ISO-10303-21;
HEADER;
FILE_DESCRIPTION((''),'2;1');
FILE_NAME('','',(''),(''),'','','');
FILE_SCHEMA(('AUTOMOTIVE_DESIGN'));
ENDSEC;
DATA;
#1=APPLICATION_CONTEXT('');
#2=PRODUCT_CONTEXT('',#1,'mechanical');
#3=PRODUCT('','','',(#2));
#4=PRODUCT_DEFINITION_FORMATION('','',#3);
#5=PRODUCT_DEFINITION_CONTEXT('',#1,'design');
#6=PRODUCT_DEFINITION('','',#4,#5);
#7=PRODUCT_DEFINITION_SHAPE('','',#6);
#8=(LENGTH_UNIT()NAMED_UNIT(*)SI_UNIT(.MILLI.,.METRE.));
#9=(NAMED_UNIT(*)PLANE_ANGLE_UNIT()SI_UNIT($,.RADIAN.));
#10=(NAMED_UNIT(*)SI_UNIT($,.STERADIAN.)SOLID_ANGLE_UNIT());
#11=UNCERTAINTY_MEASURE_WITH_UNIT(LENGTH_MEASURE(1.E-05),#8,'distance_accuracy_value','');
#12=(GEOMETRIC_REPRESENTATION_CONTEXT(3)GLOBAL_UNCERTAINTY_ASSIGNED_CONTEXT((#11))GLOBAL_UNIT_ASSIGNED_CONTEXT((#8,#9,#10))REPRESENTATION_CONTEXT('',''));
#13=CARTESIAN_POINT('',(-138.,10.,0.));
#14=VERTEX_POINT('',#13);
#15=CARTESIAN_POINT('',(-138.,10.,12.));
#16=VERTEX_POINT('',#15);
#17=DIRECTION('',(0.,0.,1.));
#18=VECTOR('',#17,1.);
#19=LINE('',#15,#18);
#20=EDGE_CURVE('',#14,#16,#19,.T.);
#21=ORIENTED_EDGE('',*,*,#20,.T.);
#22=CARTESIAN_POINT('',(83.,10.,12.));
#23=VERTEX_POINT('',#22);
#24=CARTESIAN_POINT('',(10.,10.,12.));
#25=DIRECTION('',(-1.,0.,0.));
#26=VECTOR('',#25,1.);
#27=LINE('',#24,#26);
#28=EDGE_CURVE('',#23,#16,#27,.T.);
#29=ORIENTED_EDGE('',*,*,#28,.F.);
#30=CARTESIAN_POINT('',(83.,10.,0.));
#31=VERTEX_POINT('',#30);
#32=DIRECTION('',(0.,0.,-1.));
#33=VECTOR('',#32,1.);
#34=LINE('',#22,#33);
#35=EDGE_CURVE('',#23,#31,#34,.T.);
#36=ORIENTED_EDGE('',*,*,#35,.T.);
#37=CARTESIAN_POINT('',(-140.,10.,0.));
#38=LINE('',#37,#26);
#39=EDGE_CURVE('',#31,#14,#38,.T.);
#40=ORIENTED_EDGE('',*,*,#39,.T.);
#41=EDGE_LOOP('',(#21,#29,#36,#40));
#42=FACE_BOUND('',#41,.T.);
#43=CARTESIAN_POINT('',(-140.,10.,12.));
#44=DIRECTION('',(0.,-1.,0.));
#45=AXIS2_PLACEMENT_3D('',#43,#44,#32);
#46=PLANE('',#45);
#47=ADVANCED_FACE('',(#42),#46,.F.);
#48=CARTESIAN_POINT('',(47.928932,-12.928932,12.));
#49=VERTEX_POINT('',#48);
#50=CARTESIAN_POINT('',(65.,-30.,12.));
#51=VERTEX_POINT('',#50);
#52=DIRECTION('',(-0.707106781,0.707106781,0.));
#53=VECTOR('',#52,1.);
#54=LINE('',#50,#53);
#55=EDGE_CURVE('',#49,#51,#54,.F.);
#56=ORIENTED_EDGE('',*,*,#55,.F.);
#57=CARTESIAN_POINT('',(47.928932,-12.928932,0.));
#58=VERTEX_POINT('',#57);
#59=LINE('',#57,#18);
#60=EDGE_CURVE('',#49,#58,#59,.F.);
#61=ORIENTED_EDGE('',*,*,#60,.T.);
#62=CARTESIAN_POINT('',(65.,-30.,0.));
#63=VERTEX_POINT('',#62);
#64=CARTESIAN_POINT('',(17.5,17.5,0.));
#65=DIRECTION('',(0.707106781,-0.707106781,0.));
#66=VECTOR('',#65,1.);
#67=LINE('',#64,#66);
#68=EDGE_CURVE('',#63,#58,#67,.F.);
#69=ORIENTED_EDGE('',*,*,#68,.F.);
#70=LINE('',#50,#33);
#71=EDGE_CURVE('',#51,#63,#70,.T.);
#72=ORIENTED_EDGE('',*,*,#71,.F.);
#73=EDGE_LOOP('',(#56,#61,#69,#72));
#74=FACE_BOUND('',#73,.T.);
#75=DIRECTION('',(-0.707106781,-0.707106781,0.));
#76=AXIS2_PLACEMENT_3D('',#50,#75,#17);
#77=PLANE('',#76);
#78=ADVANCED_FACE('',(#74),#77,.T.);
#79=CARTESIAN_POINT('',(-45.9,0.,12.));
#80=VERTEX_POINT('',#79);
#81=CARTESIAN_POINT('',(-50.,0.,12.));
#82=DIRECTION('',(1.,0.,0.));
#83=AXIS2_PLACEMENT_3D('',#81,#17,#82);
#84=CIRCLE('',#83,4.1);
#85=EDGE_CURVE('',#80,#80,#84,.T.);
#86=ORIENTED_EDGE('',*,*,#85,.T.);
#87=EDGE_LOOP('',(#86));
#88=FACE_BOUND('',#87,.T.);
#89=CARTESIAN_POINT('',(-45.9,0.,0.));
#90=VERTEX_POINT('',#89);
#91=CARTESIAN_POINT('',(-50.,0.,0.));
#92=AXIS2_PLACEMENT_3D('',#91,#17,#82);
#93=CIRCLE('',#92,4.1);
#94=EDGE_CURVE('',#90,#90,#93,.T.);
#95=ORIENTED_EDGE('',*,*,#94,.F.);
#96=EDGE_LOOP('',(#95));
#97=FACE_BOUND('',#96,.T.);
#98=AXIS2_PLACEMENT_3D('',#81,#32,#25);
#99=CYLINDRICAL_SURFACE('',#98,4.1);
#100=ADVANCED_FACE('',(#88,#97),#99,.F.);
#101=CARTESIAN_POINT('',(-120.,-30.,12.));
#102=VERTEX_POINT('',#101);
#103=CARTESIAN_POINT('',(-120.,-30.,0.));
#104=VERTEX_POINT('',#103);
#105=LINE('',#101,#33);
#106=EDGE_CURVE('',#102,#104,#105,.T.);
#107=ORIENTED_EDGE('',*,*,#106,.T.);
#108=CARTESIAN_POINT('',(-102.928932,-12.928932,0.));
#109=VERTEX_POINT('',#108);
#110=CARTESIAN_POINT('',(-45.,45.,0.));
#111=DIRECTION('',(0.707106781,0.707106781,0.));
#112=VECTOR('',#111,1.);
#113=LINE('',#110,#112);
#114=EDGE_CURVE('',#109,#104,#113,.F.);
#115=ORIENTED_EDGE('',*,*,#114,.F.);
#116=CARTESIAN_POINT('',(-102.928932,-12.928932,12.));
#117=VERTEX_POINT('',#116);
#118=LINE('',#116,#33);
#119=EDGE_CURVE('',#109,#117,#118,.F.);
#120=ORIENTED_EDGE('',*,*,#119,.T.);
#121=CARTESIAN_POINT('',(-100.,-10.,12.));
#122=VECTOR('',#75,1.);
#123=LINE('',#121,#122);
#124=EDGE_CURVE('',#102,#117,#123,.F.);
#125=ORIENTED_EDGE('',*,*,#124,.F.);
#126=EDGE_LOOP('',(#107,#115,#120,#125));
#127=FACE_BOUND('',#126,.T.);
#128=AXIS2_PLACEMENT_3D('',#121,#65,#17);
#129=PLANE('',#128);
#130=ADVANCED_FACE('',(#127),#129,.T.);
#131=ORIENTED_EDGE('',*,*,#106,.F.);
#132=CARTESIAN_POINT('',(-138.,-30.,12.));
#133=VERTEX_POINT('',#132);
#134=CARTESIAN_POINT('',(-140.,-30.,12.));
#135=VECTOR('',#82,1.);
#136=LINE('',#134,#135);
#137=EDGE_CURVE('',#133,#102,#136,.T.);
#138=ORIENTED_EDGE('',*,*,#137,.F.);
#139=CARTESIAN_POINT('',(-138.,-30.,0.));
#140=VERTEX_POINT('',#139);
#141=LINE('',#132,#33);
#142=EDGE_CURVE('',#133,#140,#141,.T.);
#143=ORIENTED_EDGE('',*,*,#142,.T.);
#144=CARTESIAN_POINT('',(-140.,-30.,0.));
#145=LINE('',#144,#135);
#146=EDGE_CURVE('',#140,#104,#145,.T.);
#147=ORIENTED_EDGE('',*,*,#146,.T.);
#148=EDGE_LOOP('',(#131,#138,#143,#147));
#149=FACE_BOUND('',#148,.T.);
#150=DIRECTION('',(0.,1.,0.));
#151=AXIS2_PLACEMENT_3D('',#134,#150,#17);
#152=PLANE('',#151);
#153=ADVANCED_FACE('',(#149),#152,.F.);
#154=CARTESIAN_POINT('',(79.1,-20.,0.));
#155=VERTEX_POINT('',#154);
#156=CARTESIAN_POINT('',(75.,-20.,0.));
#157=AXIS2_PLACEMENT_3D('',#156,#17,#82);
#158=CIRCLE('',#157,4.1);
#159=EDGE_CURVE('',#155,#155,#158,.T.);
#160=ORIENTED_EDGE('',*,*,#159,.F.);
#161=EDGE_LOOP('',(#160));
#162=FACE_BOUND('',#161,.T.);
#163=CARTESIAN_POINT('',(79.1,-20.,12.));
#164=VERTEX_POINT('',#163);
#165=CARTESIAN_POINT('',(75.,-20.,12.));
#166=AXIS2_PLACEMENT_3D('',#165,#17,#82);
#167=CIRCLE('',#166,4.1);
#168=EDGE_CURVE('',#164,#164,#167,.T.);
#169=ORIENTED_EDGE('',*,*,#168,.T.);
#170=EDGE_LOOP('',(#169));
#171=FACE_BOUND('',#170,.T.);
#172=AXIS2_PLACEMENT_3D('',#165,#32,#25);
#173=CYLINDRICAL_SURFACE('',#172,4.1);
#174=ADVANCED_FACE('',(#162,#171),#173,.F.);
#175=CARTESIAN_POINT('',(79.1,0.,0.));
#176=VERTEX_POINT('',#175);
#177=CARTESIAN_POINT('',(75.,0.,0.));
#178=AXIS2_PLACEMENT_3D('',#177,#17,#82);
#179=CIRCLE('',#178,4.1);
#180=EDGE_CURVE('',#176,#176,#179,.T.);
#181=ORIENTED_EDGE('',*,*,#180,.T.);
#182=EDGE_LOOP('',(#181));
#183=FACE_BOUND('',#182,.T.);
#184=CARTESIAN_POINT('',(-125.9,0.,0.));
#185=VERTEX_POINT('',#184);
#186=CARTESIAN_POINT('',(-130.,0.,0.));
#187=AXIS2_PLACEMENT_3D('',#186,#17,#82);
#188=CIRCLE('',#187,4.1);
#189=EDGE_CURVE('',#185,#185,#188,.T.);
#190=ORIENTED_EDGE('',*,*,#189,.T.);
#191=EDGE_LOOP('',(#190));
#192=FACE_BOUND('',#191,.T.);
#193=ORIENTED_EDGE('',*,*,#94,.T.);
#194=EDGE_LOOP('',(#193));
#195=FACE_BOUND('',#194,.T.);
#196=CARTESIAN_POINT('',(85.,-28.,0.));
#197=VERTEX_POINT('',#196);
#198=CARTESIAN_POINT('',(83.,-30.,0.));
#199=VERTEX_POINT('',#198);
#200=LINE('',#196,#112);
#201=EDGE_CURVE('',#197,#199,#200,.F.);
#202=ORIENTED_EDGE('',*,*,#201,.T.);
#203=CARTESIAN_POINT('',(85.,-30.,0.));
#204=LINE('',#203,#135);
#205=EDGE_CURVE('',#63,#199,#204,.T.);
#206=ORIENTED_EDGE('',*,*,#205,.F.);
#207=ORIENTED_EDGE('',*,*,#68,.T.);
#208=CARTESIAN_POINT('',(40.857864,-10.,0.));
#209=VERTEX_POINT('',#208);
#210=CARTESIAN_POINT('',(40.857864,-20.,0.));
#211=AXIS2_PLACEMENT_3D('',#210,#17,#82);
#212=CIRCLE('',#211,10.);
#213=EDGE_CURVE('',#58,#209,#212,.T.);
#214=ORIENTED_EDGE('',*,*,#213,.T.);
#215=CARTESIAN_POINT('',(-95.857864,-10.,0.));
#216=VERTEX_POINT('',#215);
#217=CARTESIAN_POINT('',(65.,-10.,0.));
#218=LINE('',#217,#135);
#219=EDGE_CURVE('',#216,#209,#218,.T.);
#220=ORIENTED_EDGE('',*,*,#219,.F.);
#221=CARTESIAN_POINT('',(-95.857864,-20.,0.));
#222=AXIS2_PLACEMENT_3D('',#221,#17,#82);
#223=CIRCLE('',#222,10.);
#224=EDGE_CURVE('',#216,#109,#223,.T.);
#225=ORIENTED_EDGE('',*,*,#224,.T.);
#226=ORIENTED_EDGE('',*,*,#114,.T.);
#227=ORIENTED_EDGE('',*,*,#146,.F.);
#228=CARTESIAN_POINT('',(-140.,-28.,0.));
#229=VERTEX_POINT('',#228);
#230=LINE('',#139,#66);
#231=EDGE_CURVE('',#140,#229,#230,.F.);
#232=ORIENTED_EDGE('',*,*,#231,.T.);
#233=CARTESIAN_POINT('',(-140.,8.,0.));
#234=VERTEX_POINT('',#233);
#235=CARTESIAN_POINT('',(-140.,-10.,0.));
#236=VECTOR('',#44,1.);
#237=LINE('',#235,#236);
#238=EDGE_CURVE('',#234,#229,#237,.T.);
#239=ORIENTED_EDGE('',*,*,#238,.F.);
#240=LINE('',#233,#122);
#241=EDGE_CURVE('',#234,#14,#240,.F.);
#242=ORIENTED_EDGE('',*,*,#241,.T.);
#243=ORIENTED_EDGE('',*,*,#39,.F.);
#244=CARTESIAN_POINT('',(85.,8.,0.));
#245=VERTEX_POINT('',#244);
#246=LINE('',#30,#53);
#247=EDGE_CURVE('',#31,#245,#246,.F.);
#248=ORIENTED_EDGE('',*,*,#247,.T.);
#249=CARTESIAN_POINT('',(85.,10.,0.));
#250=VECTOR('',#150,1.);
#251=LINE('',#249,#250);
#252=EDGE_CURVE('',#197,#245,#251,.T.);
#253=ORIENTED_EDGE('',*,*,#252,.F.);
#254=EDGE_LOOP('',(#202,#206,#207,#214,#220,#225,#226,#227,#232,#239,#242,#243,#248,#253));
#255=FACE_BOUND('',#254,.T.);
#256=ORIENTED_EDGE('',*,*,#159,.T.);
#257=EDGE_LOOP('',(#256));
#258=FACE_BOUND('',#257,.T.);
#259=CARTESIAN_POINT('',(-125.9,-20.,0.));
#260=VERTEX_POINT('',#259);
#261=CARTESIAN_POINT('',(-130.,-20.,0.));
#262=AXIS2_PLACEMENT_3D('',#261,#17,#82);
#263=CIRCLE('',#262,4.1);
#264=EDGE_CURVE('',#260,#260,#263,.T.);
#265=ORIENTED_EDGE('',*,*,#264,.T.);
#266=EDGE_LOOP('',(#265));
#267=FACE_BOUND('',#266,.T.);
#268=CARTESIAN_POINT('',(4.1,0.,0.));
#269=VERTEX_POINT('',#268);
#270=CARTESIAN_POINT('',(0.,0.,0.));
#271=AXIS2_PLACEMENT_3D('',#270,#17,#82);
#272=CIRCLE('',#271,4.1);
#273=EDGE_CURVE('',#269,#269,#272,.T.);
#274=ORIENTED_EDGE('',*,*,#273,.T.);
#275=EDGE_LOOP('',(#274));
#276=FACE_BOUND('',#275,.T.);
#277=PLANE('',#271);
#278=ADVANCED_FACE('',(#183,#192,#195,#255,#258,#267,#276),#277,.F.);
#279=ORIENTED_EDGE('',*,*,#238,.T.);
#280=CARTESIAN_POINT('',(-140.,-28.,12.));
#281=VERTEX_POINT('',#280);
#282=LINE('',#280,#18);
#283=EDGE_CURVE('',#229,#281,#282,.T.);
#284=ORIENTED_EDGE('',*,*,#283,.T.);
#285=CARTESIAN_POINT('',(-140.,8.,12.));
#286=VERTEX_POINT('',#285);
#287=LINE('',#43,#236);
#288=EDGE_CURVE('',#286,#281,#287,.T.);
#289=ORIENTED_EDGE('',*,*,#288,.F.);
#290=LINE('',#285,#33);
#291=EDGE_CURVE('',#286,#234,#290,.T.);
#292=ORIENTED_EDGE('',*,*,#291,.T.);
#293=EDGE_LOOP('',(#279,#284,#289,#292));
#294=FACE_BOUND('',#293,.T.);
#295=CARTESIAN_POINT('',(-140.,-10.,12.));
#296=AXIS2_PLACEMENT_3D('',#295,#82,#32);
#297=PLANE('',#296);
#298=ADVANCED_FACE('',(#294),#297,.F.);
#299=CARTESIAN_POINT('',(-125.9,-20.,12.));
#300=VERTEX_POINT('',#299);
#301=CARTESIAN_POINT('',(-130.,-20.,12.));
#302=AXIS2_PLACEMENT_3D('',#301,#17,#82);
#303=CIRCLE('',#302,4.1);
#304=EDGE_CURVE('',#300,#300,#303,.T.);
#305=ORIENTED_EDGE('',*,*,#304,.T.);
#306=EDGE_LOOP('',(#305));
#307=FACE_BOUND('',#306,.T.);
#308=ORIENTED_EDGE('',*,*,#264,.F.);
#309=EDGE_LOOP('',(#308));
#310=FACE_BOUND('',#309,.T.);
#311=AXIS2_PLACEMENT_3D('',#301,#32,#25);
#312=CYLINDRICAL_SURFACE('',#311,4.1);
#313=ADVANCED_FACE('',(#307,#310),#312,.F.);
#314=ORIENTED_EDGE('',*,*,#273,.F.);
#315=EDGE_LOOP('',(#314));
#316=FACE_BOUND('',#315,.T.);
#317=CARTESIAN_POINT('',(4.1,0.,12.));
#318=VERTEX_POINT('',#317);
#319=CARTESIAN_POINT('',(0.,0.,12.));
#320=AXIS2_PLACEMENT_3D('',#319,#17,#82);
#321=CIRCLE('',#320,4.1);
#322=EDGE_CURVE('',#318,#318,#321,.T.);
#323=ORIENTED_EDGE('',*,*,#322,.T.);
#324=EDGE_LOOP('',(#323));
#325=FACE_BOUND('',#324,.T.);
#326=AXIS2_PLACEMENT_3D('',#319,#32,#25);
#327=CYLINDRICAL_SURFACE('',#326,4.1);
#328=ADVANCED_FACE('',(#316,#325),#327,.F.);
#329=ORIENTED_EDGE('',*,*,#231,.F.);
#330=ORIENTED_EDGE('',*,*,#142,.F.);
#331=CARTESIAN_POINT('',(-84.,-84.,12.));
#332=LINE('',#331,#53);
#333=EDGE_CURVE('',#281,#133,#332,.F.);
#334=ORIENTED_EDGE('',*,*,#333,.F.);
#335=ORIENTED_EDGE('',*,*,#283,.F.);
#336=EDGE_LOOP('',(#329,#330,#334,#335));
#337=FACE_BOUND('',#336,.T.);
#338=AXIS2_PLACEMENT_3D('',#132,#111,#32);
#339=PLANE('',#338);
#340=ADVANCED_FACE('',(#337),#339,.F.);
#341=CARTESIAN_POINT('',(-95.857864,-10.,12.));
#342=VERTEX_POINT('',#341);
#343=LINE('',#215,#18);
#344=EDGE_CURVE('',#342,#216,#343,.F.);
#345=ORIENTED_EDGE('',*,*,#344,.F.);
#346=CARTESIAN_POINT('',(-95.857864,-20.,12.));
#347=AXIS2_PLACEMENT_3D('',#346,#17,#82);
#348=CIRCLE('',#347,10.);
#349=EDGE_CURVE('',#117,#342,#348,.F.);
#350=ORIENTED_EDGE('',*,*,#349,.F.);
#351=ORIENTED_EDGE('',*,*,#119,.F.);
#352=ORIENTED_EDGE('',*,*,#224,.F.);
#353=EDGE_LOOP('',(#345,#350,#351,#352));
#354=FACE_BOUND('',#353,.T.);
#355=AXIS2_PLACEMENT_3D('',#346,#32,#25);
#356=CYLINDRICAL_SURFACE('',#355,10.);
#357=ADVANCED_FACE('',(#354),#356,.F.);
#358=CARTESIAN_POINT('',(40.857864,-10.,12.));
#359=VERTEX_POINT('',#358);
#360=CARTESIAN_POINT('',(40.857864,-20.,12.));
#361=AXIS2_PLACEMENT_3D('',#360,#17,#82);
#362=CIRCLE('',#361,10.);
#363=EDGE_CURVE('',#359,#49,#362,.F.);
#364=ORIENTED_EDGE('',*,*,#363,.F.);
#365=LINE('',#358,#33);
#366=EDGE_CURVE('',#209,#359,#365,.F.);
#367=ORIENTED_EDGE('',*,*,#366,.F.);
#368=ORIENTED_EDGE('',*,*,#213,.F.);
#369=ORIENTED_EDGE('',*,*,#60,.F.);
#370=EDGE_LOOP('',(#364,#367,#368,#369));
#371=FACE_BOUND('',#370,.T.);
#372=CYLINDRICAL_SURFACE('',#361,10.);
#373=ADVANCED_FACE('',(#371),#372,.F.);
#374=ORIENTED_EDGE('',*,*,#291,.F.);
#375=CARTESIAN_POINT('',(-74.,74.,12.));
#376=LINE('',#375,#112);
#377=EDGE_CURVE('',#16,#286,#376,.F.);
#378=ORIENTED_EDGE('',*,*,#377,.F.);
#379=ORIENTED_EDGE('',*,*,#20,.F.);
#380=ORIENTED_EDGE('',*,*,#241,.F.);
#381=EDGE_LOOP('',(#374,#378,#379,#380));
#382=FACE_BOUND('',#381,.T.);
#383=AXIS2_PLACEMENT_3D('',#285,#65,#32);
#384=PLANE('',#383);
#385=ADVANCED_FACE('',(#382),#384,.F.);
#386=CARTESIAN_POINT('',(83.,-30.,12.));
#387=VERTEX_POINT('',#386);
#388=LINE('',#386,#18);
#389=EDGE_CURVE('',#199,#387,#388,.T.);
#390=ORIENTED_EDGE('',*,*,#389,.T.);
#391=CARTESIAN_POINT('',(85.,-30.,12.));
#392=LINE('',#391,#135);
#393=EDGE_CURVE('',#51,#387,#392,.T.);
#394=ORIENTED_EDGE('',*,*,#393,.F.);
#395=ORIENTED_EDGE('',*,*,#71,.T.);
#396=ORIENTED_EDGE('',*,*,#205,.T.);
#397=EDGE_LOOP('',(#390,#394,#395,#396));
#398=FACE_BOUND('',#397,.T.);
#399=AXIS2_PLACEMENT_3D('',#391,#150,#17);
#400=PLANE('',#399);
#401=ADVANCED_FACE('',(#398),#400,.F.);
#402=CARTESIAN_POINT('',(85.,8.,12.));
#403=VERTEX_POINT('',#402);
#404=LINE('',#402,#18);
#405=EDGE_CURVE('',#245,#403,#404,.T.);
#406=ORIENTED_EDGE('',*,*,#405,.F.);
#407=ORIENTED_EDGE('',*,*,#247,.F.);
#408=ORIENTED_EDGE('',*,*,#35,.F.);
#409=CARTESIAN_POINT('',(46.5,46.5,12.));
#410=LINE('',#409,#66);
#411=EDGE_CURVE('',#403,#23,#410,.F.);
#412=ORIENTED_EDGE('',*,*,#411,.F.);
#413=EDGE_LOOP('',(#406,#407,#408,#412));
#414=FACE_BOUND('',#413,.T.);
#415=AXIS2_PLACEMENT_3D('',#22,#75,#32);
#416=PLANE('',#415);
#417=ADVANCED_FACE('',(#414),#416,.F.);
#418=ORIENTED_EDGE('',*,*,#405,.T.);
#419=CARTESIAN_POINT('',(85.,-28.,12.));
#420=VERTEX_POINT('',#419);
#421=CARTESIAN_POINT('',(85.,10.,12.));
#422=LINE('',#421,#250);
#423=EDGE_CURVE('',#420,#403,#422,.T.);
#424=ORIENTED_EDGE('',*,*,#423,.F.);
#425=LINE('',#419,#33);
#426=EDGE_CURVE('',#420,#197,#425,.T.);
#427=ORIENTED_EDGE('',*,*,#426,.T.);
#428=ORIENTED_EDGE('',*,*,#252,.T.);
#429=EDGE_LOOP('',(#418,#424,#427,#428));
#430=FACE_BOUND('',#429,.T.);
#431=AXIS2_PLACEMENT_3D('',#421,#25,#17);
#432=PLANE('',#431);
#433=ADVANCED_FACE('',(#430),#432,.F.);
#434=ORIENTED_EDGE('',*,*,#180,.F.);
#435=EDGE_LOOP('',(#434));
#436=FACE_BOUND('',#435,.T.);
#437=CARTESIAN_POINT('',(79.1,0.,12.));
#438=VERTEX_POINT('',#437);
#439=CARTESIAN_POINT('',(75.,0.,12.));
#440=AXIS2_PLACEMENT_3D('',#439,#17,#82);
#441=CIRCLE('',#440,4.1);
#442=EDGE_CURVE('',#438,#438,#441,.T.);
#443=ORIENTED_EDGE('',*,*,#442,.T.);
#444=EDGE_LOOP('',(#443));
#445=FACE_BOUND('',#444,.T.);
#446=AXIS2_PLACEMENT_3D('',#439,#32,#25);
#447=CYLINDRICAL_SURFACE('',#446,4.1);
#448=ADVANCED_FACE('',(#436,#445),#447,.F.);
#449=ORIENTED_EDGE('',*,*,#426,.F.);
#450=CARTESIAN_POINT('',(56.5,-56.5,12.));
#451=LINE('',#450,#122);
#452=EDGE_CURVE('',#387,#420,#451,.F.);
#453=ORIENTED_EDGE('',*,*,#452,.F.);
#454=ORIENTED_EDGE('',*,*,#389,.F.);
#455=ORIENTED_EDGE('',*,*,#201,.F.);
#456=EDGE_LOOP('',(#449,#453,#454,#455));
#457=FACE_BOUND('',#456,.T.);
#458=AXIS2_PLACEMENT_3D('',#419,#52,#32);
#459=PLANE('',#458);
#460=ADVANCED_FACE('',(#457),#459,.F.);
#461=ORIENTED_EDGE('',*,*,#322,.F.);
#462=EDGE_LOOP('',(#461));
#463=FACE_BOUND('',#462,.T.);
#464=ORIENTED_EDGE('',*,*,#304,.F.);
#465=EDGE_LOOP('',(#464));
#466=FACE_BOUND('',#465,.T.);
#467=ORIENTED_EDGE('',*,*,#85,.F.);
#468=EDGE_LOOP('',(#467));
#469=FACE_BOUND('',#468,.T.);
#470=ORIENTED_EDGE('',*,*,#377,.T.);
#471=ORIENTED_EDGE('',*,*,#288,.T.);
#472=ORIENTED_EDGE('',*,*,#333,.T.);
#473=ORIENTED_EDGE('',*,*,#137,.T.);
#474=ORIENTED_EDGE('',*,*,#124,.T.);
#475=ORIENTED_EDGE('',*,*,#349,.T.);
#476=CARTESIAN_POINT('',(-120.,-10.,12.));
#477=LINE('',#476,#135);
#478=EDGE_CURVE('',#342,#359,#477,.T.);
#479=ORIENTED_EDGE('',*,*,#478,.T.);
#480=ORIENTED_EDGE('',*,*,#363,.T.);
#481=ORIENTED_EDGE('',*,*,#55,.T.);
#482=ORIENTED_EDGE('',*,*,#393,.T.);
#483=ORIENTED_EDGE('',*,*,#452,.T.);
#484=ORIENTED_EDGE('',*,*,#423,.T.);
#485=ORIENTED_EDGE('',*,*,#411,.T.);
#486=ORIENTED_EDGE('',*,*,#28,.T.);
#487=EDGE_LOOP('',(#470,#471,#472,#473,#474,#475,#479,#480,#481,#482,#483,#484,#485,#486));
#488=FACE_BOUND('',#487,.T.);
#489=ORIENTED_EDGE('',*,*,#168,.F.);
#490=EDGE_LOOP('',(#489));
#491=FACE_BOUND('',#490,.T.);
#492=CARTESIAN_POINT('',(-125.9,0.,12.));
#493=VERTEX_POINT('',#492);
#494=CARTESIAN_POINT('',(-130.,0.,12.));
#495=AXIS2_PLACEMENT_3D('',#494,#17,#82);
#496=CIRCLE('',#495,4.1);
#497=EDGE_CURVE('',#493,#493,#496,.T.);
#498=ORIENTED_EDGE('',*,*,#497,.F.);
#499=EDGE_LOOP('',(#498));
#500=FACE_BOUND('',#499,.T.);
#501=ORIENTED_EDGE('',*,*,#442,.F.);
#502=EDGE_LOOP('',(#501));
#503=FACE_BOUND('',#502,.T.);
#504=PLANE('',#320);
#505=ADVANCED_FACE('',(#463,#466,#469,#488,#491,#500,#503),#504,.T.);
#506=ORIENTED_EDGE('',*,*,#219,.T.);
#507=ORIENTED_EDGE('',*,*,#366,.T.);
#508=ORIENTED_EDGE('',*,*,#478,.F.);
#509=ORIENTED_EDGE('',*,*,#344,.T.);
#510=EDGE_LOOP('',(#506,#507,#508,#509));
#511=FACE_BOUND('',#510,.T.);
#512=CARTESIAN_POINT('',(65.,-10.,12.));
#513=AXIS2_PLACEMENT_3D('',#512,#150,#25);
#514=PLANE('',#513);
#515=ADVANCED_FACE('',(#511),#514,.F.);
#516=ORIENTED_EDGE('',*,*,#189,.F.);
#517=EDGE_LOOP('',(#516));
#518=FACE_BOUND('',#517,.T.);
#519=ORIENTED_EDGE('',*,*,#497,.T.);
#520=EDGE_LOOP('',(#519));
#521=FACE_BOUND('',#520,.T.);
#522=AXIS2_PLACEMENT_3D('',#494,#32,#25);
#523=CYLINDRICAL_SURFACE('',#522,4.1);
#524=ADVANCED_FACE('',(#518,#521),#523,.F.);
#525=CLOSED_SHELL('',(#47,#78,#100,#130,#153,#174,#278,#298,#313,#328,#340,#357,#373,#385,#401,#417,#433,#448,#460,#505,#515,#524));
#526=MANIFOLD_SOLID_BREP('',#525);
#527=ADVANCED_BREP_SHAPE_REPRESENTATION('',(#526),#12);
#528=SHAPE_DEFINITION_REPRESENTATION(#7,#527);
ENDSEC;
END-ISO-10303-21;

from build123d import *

# Parameters (mm, degrees)
SKETCH_1_R      = 4.1
EXTRUDE_1_DEPTH = 12
CHAMFER_1_SIZE  = 20
FILLET_1_R      = 10
CHAMFER_2_SIZE  = 2


with BuildPart() as part:
    # 草图1 → 凸台-拉伸1 (new body)
    with BuildSketch(Plane.XY):
        Polygon((-140, -10), (-140, -30), (-120, -30), (-120, -10), (10, -10), (65, -10), (65, -30), (85, -30), (85, 10), (10, 10), (-120, 10), (-140, 10), align=None)
        Circle(SKETCH_1_R, mode=Mode.SUBTRACT)
        with Locations((-50, 0)):
            Circle(SKETCH_1_R, mode=Mode.SUBTRACT)
        with Locations((-130, 0)):
            Circle(SKETCH_1_R, mode=Mode.SUBTRACT)
        with Locations((-130, -20)):
            Circle(SKETCH_1_R, mode=Mode.SUBTRACT)
        with Locations((75, 0)):
            Circle(SKETCH_1_R, mode=Mode.SUBTRACT)
        with Locations((75, -20)):
            Circle(SKETCH_1_R, mode=Mode.SUBTRACT)
    extrude(amount=EXTRUDE_1_DEPTH)

    # 倒角1
    chamfer_1_edges = [part.edges().sort_by_distance(p)[0] for p in [
        (65, -10, 6),
        (-120, -10, 6),
    ]]
    chamfer(chamfer_1_edges, length=CHAMFER_1_SIZE - 0.0001)  # a hair under: the kernel refuses the full size

    # 圆角1
    fillet_1_edges = [part.edges().sort_by_distance(p)[0] for p in [
        (-100.0001, -10, 6),
        (45.0001, -10, 6),
    ]]
    fillet(fillet_1_edges, radius=FILLET_1_R)

    # 倒角2
    chamfer_2_edges = [part.edges().sort_by_distance(p)[0] for p in [
        (-140, -30, 6),
        (-140, 10, 6),
        (85, 10, 6),
        (85, -30, 6),
    ]]
    chamfer(chamfer_2_edges, length=CHAMFER_2_SIZE)


solid = part.part
